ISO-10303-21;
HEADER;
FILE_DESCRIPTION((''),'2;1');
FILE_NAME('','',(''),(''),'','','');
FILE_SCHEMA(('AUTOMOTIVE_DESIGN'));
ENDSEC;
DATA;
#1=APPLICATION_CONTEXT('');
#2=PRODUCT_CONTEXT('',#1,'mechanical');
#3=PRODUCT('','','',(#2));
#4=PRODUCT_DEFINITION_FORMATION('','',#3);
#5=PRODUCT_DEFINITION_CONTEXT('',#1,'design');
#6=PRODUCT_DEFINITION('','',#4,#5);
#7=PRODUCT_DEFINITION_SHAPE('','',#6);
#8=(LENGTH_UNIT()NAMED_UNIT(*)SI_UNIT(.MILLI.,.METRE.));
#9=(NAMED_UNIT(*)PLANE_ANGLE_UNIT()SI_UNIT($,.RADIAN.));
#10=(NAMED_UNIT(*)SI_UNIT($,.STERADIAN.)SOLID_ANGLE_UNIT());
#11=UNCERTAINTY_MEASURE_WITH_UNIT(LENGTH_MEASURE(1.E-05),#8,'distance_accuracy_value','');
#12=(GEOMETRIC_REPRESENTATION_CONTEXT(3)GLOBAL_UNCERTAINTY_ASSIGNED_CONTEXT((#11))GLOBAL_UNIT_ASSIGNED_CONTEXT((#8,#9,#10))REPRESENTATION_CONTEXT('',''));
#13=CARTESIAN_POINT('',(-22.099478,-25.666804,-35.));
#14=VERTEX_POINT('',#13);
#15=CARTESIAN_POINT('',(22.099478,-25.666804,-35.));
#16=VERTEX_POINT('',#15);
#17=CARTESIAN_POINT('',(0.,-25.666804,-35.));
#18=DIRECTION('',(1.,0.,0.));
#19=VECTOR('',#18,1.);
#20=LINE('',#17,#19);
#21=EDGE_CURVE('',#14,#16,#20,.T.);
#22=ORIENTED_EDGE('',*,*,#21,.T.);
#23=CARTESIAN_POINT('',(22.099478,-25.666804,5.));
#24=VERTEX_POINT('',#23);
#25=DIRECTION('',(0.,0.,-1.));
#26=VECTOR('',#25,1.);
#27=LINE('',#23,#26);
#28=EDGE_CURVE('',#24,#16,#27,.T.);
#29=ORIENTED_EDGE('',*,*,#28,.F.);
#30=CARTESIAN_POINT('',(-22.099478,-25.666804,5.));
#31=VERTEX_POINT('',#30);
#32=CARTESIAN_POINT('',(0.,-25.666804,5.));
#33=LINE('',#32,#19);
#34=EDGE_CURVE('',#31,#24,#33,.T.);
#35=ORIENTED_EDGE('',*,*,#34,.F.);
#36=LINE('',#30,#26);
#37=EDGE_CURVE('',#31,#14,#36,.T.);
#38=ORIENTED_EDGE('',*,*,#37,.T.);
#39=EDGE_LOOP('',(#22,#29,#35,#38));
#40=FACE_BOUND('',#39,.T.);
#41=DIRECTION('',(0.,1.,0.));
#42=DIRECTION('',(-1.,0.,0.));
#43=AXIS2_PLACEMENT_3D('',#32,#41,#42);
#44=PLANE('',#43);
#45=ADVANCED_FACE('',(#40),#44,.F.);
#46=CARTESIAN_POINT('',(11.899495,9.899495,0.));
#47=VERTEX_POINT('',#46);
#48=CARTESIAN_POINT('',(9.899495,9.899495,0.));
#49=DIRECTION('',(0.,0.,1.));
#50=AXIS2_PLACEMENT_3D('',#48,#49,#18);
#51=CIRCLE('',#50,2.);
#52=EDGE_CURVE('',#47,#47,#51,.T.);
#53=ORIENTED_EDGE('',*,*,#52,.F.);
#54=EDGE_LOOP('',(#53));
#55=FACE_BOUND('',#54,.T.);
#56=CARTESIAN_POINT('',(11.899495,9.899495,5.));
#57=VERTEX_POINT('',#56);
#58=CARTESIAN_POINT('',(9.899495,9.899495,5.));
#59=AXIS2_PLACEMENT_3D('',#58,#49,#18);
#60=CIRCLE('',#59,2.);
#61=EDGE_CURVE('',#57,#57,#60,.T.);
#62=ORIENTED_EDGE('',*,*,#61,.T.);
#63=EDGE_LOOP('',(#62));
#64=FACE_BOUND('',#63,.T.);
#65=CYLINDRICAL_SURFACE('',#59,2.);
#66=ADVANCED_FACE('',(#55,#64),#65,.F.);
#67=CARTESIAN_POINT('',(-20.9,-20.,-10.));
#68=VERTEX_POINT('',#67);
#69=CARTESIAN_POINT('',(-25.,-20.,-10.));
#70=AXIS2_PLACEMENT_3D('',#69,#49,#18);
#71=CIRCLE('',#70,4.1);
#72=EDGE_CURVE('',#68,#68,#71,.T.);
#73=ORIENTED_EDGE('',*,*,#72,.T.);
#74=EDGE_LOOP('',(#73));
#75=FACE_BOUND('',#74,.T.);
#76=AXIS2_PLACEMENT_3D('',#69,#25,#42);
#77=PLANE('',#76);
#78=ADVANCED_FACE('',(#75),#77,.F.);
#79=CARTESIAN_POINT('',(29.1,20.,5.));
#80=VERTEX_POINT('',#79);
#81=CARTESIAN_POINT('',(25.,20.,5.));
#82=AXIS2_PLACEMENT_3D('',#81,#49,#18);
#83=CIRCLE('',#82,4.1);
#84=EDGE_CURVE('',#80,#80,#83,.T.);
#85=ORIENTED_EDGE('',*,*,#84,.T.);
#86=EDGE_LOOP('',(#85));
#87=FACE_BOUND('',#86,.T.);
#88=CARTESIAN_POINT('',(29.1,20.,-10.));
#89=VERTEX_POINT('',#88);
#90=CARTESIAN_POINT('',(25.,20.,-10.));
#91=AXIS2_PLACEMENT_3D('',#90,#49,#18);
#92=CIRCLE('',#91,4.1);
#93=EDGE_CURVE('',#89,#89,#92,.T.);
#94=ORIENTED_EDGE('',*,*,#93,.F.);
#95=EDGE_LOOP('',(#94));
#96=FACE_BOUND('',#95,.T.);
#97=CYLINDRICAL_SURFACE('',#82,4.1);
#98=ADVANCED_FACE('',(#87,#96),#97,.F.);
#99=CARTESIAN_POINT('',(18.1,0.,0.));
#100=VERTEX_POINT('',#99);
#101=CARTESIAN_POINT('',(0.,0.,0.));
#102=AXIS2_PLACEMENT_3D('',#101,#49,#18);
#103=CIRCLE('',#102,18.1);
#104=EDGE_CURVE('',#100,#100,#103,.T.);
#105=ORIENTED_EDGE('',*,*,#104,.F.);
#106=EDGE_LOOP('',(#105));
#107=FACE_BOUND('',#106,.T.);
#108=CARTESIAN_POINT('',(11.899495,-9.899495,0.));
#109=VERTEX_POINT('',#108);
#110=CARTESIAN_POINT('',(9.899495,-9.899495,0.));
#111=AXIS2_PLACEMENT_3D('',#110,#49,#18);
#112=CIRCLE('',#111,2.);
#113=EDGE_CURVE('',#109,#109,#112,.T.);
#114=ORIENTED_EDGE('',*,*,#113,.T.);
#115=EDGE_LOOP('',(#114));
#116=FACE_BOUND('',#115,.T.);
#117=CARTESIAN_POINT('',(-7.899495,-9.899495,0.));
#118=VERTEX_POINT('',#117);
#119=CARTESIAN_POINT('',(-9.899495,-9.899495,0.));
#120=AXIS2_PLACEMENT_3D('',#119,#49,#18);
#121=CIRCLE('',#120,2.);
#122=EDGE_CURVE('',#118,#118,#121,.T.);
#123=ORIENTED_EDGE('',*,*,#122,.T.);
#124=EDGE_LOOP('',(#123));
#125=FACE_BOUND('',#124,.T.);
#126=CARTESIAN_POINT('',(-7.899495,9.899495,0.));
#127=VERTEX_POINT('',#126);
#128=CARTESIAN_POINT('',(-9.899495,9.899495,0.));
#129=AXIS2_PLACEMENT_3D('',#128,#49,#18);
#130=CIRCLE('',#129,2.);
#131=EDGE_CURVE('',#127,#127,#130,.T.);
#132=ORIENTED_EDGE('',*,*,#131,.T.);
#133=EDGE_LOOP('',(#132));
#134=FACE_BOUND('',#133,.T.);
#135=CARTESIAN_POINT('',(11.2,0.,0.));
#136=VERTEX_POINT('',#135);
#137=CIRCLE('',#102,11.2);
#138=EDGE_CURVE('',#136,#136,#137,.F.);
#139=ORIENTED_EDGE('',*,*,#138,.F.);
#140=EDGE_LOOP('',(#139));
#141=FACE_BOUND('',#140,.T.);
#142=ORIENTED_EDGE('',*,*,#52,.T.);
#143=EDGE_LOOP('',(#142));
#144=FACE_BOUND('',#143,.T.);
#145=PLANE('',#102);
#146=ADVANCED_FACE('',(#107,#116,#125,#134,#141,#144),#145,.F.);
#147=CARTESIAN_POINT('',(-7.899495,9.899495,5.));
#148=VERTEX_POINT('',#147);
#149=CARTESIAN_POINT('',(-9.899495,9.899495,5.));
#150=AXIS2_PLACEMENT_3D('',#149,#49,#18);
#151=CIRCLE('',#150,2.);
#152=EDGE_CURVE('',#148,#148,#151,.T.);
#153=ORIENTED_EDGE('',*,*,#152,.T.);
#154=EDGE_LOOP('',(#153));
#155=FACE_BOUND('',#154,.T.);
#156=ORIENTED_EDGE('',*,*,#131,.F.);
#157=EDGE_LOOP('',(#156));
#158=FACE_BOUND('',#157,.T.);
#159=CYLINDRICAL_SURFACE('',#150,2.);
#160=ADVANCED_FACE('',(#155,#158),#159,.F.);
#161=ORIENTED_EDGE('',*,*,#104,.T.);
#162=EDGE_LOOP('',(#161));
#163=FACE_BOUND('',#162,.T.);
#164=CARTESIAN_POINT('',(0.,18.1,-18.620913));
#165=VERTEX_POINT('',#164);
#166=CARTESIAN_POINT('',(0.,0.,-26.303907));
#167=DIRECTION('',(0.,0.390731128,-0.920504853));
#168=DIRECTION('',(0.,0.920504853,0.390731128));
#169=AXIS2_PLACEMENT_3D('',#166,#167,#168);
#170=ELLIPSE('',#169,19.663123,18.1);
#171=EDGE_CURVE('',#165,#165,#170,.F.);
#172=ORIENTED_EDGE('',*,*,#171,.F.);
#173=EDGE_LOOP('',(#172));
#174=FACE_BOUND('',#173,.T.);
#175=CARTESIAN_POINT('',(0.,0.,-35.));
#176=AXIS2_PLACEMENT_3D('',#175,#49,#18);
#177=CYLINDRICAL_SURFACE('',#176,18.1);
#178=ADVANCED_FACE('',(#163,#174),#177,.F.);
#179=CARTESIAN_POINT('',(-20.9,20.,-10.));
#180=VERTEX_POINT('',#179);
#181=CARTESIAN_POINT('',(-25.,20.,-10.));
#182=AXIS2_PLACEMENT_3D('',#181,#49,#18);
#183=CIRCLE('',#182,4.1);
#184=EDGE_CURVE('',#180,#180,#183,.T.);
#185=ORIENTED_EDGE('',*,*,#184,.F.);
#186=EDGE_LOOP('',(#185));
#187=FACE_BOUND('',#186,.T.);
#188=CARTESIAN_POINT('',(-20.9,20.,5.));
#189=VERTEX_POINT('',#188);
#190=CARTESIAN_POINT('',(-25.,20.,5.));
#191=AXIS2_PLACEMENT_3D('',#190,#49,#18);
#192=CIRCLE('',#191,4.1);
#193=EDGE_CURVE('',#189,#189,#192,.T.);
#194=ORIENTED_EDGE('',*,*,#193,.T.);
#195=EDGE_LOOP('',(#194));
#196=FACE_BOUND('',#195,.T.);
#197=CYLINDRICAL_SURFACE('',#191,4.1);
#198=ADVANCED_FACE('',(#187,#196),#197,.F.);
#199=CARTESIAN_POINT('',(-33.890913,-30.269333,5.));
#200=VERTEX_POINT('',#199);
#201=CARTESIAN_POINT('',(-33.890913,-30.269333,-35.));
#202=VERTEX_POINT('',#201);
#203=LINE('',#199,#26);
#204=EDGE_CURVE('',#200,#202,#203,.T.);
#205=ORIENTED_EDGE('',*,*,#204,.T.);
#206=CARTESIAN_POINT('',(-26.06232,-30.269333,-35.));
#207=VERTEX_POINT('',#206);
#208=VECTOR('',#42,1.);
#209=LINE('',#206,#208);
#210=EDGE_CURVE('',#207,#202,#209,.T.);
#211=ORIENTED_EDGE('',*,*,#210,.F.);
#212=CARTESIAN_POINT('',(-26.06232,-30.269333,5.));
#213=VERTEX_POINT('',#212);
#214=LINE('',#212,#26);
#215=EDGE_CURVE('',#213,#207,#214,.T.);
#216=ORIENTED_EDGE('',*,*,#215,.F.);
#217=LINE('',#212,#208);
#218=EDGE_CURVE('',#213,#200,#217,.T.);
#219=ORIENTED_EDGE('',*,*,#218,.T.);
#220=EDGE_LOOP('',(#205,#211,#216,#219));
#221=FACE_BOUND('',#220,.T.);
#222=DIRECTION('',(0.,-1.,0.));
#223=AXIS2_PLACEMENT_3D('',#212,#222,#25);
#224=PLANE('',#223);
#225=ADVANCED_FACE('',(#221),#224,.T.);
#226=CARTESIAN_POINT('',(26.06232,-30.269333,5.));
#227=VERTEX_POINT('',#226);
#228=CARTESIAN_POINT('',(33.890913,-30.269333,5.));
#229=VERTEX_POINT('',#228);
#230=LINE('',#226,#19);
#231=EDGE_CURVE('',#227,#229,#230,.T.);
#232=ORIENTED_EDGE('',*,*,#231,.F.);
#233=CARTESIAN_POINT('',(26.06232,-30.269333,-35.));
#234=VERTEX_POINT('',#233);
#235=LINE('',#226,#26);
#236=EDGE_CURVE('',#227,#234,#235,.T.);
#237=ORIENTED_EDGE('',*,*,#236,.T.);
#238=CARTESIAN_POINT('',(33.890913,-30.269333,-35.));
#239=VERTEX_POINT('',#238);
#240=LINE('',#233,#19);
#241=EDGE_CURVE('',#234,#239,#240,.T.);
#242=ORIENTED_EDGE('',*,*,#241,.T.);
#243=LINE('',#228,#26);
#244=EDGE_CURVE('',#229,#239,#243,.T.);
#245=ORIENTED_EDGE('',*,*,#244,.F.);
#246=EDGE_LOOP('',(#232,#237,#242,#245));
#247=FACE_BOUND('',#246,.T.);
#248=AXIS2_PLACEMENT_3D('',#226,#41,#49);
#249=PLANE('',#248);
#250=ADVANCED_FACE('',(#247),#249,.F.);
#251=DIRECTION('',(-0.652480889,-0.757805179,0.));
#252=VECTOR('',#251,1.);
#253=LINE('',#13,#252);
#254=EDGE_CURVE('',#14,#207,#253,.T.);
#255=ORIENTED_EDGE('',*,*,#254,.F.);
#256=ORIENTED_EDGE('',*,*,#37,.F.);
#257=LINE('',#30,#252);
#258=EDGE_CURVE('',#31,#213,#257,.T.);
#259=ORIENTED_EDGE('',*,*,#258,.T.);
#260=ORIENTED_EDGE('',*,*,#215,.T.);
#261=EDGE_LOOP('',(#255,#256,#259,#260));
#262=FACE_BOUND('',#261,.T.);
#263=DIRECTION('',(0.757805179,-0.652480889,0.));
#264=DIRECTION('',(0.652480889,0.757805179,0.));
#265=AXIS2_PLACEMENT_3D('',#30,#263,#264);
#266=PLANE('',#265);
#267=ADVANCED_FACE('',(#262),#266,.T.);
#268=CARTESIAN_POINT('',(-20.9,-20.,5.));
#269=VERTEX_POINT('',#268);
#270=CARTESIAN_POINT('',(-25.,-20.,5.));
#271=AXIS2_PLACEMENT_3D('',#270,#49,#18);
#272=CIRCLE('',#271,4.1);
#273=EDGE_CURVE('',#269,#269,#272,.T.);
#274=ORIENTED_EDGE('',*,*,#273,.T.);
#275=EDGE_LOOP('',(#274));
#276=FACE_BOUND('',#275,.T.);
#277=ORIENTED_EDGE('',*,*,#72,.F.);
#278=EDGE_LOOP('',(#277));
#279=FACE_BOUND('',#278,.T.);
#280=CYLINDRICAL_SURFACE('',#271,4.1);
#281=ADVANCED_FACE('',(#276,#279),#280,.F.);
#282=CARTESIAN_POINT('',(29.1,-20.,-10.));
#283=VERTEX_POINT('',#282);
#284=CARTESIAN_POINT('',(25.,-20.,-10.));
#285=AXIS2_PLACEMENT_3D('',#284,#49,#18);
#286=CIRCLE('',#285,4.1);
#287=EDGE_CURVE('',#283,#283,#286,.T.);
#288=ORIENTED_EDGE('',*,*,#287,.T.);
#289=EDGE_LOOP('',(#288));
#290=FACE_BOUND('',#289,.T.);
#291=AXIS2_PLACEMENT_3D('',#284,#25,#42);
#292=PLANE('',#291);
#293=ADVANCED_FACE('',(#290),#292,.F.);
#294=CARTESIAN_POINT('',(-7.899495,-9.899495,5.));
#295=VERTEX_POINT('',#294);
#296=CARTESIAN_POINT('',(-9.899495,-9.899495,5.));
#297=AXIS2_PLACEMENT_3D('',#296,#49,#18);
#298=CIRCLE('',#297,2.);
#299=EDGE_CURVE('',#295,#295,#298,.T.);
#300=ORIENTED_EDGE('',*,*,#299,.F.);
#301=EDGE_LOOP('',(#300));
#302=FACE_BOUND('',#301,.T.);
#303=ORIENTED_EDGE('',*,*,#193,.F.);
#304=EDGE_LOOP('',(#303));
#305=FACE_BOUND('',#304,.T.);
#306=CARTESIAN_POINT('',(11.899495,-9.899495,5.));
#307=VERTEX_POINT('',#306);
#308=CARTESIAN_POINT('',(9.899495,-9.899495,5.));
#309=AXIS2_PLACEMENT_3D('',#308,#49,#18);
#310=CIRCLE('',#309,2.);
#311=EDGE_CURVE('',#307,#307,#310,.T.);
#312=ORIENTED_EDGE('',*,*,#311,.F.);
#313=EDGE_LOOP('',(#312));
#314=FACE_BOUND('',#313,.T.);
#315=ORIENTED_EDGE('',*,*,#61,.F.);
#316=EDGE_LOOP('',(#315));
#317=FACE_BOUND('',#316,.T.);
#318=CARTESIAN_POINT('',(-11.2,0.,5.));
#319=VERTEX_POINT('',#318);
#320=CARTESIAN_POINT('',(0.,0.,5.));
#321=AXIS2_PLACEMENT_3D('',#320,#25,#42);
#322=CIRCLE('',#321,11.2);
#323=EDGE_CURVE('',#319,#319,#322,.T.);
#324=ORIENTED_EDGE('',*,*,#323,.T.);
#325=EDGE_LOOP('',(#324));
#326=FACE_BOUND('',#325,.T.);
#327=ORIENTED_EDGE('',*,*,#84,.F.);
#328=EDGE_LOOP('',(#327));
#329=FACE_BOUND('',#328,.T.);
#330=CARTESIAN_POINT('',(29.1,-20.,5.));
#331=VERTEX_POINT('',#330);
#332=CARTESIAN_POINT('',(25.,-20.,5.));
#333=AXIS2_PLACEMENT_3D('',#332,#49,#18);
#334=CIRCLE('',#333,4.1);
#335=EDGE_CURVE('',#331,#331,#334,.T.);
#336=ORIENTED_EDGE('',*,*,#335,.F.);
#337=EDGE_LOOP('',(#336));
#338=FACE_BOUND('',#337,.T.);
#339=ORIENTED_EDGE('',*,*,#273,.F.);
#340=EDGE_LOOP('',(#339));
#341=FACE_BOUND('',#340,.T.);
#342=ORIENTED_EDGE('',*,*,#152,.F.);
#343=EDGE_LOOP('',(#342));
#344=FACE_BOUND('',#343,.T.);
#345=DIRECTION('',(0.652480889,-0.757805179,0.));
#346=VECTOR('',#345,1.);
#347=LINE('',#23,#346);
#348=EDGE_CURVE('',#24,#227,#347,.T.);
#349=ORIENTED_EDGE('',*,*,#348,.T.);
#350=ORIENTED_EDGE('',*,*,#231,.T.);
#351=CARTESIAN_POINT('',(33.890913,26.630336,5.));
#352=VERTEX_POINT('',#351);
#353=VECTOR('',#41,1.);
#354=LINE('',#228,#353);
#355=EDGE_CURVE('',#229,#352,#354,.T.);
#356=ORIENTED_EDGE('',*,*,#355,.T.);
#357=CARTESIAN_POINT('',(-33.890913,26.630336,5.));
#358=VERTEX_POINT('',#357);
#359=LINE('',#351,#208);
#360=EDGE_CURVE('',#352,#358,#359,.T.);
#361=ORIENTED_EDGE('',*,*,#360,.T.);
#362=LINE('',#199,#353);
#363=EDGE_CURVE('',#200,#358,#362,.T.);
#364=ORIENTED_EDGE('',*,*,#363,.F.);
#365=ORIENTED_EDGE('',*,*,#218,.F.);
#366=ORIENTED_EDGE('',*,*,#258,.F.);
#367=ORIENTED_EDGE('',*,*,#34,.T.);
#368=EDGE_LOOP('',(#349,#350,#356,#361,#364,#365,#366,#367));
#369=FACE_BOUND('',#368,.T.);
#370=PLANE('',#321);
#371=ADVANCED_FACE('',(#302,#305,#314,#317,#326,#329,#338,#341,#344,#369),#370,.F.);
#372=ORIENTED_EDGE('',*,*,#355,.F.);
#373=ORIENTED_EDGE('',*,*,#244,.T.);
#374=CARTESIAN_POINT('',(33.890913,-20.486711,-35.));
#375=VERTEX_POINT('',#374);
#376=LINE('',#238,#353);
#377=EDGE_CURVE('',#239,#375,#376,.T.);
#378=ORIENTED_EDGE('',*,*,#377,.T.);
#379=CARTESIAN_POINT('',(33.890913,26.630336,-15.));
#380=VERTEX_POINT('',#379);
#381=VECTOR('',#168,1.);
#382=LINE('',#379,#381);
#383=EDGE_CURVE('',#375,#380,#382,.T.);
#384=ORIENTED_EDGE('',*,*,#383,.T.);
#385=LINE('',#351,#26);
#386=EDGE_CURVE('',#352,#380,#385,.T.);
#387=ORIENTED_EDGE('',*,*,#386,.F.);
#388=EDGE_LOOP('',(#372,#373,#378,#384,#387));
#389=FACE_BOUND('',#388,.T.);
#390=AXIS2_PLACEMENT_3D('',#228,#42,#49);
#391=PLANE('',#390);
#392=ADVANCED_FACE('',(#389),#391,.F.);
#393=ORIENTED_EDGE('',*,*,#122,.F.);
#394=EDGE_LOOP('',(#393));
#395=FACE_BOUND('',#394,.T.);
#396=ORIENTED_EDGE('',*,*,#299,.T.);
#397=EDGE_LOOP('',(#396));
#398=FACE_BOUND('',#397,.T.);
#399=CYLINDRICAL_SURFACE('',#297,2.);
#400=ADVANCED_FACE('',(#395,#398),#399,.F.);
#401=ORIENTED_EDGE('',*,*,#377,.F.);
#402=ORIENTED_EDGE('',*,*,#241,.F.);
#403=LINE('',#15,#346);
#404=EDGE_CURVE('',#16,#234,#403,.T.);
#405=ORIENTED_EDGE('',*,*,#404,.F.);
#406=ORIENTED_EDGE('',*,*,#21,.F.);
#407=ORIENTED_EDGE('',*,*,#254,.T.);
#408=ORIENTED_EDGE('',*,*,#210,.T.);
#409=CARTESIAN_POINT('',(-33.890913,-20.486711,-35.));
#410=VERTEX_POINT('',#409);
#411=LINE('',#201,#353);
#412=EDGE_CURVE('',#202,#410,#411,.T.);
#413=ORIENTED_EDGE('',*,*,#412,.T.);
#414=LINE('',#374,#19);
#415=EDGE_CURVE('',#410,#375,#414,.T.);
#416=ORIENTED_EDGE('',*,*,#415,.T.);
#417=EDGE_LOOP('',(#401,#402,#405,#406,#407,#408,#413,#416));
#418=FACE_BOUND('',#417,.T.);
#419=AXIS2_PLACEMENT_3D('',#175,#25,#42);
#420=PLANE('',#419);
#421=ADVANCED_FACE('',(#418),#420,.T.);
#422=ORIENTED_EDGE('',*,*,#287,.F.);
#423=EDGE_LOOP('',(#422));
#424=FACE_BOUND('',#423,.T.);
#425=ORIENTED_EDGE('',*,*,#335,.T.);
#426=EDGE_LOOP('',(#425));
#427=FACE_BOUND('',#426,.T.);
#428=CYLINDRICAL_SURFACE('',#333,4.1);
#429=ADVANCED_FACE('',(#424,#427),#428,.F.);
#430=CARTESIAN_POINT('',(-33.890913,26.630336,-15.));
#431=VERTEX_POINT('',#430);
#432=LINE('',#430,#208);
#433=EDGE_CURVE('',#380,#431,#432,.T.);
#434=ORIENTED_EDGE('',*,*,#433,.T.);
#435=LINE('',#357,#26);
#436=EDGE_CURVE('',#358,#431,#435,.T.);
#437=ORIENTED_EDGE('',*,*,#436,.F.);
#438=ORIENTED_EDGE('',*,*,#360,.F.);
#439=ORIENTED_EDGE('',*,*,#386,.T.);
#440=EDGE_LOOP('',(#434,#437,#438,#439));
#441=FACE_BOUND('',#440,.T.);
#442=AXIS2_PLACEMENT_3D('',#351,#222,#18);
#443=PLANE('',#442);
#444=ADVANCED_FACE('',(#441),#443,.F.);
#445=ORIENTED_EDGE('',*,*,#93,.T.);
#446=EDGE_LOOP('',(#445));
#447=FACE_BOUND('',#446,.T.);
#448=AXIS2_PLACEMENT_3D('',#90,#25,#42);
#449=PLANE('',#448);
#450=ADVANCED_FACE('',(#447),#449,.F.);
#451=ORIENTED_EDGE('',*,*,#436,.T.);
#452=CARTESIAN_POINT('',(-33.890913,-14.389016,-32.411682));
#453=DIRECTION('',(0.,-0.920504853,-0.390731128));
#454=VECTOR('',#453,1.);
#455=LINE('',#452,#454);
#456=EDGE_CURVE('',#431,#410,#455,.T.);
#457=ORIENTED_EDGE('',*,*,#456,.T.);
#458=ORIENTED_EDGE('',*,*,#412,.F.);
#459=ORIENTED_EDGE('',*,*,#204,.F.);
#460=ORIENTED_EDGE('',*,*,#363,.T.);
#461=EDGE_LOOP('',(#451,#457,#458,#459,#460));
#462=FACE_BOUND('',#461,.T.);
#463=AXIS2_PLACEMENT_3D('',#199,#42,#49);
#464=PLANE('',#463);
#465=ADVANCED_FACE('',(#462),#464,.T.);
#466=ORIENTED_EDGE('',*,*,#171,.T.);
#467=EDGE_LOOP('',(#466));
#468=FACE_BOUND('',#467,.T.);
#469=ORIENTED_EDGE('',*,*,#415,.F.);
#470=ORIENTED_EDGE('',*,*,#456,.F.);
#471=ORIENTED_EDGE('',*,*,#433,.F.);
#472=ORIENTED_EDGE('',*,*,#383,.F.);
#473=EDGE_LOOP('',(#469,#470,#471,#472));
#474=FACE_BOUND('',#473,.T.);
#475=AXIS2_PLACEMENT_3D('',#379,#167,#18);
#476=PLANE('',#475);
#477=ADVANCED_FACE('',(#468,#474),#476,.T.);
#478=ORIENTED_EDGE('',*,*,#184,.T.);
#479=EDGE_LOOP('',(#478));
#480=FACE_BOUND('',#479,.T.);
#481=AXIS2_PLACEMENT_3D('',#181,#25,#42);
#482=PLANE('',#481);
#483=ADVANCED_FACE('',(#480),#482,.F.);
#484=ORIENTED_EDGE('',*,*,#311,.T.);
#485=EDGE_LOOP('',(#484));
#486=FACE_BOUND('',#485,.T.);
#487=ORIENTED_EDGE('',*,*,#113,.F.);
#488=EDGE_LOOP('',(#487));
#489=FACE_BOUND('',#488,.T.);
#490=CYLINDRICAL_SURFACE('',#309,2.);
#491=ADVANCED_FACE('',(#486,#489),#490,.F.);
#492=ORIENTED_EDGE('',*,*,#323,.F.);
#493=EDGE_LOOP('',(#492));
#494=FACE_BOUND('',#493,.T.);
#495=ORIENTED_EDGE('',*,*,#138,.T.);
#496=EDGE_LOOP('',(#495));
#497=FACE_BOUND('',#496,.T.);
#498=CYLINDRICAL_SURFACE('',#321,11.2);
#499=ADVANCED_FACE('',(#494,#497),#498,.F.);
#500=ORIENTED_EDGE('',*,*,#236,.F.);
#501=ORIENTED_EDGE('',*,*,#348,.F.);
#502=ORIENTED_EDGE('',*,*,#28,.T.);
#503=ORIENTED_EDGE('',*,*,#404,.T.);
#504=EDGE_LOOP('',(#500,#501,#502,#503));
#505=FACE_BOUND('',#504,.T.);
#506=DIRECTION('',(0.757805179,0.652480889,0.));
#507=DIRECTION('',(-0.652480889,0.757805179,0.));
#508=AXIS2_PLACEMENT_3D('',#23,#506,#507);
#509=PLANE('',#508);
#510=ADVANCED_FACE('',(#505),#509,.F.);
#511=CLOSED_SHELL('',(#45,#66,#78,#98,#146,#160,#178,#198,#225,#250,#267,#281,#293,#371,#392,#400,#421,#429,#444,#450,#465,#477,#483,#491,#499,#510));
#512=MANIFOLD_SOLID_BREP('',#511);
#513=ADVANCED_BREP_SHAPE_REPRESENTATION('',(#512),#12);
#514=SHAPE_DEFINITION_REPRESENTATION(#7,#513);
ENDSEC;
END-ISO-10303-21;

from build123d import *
from build123d.topology import SkipClean

# Parameters (mm, degrees)
SALIENTE_EXTRUIR1_START = -35
SALIENTE_EXTRUIR1_DEPTH = 40
CROQUIS5_R              = 18.1
CORTAR_EXTRUIR1_DEPTH   = 35
CHAFL_N1_SIZE           = 47.117047316
CHAFL_N1_SIZE_2         = 20
TALADRO1_D              = 8.2
TALADRO1_DEPTH          = 15
TALADRO3_D              = 4
MATRIZC2_COUNT          = 4


with BuildPart() as part:
    # Croquis2 → Saliente-Extruir1 (new body)
    with BuildSketch(Plane.XY.offset(SALIENTE_EXTRUIR1_START)):
        with BuildLine():
            Line((0, -11.2), (0, -25.666803753))
            Line((0, -25.666803753), (22.099478046, -25.666803753))
            Line((22.099478046, -25.666803753), (26.062319902, -30.269332556))
            Line((26.062319902, -30.269332556), (33.890912562, -30.269332556))
            Line((33.890912562, -30.269332556), (33.890912562, 26.630335828))
            Line((33.890912562, 26.630335828), (0, 26.630335828))
            Line((0, 26.630335828), (0, 11.2))
            ThreePointArc((0, 11.2), (11.2, 0), (0, -11.2))
        make_face()
    saliente_extruir1 = extrude(amount=SALIENTE_EXTRUIR1_DEPTH)

    # Simetría1: Saliente-Extruir1 across plane
    with SkipClean():  # the faces are left unmerged after this step: merging them gives an invalid solid
        add(saliente_extruir1.mirror(Plane(origin=(0, 0, 0), x_dir=(0, 0, 1), z_dir=(1, 0, 0))))

    # Croquis5 → Cortar-Extruir1 (cut)
    with SkipClean():  # the faces are left unmerged after this step: merging them gives an invalid solid
        with BuildSketch(Plane.XY):
            Circle(CROQUIS5_R)
        extrude(amount=-CORTAR_EXTRUIR1_DEPTH, mode=Mode.SUBTRACT)

    # Chaflán1
    # the kernel refuses this chamfer: 47.117047316, 20 mm, written as the material it takes off along each edge
    with BuildSketch(Plane(origin=(156.034553022, 26.630335828, -35), x_dir=(0, -0.9998864034585262, -0.015072497429863657), z_dir=(-1, 0, 0))) as chafl_n1_piece_1:
        Polygon((CHAFL_N1_SIZE * 0.999886403469, CHAFL_N1_SIZE * 0.01507249743), (-CHAFL_N1_SIZE_2 * 0.0150724974299, CHAFL_N1_SIZE_2 * 0.999886403459), (0, 0), align=None)
    extrude(amount=156.034553022, mode=Mode.SUBTRACT)
    with BuildSketch(Plane(origin=(-156.034553022, 26.630335828, -35), x_dir=(0, -0.9998864034585262, -0.015072497429863657), z_dir=(1, 0, 0))) as chafl_n1_piece_2:
        Polygon((CHAFL_N1_SIZE * 0.999886403469, -CHAFL_N1_SIZE * 0.01507249743), (-CHAFL_N1_SIZE_2 * 0.0150724974299, -CHAFL_N1_SIZE_2 * 0.999886403459), (0, 0), align=None)
    extrude(amount=156.034553022, mode=Mode.SUBTRACT)

    # Taladro1
    with Locations(Plane.XY.offset(5)):
        with Locations((25, -20), (25, 20), (-25, 20), (-25, -20)):
            Hole(TALADRO1_D / 2, depth=TALADRO1_DEPTH)

    # Taladro3 (through all)
    with Locations(Plane.XY.offset(5)):
        with Locations((9.899494937, 9.899494937)):
            taladro3 = Hole(TALADRO3_D / 2)

    # MatrizC2: Taladro3 ×4 about axis
    matrizc2_axis = Axis((0, 0, 0), (0, 0, 1))
    for i in range(1, MATRIZC2_COUNT):
        add(taladro3.rotate(matrizc2_axis, i * 360 / MATRIZC2_COUNT), mode=Mode.SUBTRACT)


solid = part.part
